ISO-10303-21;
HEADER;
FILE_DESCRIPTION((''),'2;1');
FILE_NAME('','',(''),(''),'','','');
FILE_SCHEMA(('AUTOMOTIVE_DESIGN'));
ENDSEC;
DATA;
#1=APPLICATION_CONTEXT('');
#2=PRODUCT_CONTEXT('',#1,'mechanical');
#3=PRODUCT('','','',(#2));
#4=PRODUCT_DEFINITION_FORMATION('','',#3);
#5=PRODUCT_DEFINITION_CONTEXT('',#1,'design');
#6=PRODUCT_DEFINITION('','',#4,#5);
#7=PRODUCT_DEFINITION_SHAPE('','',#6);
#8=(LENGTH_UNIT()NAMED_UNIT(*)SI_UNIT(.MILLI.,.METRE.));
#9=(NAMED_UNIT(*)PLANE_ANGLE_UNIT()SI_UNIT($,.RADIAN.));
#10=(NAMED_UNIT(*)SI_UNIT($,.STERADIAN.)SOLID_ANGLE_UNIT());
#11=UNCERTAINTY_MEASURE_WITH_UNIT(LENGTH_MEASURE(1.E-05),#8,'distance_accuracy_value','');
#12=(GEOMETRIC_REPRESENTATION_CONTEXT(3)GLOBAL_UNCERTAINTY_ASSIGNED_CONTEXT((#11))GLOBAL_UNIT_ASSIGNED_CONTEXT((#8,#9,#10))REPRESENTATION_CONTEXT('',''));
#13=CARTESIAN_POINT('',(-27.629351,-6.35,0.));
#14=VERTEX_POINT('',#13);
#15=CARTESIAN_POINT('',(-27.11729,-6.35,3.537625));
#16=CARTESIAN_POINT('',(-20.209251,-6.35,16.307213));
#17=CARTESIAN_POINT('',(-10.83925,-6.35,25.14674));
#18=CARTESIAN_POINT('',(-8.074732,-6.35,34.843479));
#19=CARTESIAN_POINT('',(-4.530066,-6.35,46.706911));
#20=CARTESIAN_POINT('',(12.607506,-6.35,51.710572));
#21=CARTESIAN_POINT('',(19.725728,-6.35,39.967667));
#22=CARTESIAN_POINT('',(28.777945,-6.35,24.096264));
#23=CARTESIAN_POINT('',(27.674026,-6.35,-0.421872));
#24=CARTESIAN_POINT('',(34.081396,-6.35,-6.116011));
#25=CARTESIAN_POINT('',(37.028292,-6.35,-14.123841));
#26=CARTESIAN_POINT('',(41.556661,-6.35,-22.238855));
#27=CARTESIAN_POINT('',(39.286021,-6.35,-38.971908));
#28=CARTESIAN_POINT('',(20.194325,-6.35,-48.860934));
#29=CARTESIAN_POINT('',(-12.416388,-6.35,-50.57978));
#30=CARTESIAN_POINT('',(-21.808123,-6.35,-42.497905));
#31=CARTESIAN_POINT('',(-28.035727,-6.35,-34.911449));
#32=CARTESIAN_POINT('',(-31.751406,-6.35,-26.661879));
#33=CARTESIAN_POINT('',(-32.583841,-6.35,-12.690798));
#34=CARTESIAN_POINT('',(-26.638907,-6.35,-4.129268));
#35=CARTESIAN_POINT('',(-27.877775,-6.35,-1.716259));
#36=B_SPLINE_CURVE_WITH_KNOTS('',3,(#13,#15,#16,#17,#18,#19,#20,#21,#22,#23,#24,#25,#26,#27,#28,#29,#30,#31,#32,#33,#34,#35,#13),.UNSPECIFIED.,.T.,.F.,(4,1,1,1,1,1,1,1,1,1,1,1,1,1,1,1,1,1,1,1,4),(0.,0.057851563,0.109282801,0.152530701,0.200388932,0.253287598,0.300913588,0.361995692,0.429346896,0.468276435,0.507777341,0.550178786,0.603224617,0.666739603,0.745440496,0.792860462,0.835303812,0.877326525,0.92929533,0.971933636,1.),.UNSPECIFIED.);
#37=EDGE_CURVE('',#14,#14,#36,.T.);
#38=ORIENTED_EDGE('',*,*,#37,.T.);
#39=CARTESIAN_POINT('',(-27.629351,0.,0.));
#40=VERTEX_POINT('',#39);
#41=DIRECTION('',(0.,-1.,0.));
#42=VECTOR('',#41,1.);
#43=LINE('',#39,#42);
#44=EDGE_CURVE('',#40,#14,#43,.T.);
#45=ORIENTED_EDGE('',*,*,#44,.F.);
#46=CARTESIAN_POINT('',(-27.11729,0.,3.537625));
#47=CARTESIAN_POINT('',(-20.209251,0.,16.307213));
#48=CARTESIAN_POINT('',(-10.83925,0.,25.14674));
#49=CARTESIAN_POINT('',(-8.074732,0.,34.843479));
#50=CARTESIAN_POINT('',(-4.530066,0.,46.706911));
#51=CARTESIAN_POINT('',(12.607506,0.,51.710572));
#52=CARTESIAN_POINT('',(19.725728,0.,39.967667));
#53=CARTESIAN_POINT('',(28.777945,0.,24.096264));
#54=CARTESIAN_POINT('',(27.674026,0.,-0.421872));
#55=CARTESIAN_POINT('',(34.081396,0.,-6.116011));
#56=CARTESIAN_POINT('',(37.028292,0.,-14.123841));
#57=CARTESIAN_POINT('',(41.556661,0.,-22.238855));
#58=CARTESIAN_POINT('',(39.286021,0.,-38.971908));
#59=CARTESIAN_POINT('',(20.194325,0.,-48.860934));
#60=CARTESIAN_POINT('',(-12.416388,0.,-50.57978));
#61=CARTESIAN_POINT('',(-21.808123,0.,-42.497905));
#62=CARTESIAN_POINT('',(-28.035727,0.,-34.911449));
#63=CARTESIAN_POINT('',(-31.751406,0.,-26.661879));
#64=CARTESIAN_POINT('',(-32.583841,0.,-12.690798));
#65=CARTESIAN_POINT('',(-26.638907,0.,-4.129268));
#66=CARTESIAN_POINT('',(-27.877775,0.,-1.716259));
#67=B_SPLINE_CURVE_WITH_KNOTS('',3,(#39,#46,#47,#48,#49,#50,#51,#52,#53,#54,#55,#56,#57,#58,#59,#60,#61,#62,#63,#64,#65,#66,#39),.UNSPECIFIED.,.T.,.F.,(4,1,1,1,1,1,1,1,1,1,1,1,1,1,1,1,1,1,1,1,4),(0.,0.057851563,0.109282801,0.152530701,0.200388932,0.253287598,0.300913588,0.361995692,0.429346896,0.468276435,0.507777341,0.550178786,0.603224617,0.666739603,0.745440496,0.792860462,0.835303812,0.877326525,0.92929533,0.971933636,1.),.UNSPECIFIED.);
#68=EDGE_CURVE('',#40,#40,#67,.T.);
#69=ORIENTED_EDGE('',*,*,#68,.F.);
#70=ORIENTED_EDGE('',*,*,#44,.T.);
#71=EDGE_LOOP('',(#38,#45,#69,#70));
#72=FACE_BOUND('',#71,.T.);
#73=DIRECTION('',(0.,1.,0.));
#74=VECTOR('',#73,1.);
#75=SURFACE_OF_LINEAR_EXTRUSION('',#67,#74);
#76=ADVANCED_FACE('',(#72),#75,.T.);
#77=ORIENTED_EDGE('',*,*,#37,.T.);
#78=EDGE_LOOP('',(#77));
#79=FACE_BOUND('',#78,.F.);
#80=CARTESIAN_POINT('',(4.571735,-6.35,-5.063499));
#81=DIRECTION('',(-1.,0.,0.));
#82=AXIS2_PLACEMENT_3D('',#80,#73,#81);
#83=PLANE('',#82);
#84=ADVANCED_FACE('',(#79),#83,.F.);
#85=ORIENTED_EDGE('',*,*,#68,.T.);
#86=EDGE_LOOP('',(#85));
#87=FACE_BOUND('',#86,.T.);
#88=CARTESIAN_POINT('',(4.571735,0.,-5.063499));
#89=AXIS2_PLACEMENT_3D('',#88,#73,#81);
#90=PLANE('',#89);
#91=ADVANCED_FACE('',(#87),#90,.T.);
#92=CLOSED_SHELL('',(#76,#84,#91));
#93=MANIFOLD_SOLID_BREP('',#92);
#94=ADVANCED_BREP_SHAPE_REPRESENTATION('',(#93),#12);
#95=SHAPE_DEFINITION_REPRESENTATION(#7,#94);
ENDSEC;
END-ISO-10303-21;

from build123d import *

# Parameters (mm, degrees)
F1_DEPTH = 6.35


# Not quite as in the source:
# - a feature names something its author has since deleted; it is built from what else it names


with BuildPart() as f1:
    # F0 (on Front) → F1 (new body)
    with BuildSketch(Plane.XZ):
        with BuildLine():
            add(Edge.make_bspline(
                [(-27.6293512434, 0), (-27.1172896263, 3.5376254392), (-20.2092513225, 16.3072133999), (-10.8392504403, 25.1467404672), (-8.0747318133, 34.8434785474), (-4.5300661972, 46.7069107339), (12.6075059031, 51.7105715763), (19.7257277224, 39.9676667182), (28.7779451774, 24.0962644882), (27.6740258612, -0.421871611), (34.0813959728, -6.1160111709), (37.0282916957, -14.1238412328), (41.5566608206, -22.2388548115), (39.2860211775, -38.9719075539), (20.1943249395, -48.8609336235), (-12.4163877173, -50.5797798703), (-21.8081226127, -42.4979054548), (-28.0357268673, -34.9114485477), (-31.7514062662, -26.6618791131), (-32.58384075, -12.6907975978), (-26.6389070636, -4.129267785), (-27.8777750886, -1.716259304), (-27.6293512434, 0)],
                knots=[0, 0, 0, 0, 0.0578515626, 0.1092828013, 0.1525307013, 0.2003889319, 0.2532875978, 0.3009135883, 0.3619956922, 0.4293468962, 0.468276435, 0.5077773412, 0.5501787861, 0.6032246174, 0.6667396033, 0.7454404961, 0.7928604617, 0.8353038116, 0.8773265245, 0.9292953295, 0.9719336362, 1, 1, 1, 1], degree=3))
        make_face()
    extrude(amount=F1_DEPTH)


solid = f1.part
